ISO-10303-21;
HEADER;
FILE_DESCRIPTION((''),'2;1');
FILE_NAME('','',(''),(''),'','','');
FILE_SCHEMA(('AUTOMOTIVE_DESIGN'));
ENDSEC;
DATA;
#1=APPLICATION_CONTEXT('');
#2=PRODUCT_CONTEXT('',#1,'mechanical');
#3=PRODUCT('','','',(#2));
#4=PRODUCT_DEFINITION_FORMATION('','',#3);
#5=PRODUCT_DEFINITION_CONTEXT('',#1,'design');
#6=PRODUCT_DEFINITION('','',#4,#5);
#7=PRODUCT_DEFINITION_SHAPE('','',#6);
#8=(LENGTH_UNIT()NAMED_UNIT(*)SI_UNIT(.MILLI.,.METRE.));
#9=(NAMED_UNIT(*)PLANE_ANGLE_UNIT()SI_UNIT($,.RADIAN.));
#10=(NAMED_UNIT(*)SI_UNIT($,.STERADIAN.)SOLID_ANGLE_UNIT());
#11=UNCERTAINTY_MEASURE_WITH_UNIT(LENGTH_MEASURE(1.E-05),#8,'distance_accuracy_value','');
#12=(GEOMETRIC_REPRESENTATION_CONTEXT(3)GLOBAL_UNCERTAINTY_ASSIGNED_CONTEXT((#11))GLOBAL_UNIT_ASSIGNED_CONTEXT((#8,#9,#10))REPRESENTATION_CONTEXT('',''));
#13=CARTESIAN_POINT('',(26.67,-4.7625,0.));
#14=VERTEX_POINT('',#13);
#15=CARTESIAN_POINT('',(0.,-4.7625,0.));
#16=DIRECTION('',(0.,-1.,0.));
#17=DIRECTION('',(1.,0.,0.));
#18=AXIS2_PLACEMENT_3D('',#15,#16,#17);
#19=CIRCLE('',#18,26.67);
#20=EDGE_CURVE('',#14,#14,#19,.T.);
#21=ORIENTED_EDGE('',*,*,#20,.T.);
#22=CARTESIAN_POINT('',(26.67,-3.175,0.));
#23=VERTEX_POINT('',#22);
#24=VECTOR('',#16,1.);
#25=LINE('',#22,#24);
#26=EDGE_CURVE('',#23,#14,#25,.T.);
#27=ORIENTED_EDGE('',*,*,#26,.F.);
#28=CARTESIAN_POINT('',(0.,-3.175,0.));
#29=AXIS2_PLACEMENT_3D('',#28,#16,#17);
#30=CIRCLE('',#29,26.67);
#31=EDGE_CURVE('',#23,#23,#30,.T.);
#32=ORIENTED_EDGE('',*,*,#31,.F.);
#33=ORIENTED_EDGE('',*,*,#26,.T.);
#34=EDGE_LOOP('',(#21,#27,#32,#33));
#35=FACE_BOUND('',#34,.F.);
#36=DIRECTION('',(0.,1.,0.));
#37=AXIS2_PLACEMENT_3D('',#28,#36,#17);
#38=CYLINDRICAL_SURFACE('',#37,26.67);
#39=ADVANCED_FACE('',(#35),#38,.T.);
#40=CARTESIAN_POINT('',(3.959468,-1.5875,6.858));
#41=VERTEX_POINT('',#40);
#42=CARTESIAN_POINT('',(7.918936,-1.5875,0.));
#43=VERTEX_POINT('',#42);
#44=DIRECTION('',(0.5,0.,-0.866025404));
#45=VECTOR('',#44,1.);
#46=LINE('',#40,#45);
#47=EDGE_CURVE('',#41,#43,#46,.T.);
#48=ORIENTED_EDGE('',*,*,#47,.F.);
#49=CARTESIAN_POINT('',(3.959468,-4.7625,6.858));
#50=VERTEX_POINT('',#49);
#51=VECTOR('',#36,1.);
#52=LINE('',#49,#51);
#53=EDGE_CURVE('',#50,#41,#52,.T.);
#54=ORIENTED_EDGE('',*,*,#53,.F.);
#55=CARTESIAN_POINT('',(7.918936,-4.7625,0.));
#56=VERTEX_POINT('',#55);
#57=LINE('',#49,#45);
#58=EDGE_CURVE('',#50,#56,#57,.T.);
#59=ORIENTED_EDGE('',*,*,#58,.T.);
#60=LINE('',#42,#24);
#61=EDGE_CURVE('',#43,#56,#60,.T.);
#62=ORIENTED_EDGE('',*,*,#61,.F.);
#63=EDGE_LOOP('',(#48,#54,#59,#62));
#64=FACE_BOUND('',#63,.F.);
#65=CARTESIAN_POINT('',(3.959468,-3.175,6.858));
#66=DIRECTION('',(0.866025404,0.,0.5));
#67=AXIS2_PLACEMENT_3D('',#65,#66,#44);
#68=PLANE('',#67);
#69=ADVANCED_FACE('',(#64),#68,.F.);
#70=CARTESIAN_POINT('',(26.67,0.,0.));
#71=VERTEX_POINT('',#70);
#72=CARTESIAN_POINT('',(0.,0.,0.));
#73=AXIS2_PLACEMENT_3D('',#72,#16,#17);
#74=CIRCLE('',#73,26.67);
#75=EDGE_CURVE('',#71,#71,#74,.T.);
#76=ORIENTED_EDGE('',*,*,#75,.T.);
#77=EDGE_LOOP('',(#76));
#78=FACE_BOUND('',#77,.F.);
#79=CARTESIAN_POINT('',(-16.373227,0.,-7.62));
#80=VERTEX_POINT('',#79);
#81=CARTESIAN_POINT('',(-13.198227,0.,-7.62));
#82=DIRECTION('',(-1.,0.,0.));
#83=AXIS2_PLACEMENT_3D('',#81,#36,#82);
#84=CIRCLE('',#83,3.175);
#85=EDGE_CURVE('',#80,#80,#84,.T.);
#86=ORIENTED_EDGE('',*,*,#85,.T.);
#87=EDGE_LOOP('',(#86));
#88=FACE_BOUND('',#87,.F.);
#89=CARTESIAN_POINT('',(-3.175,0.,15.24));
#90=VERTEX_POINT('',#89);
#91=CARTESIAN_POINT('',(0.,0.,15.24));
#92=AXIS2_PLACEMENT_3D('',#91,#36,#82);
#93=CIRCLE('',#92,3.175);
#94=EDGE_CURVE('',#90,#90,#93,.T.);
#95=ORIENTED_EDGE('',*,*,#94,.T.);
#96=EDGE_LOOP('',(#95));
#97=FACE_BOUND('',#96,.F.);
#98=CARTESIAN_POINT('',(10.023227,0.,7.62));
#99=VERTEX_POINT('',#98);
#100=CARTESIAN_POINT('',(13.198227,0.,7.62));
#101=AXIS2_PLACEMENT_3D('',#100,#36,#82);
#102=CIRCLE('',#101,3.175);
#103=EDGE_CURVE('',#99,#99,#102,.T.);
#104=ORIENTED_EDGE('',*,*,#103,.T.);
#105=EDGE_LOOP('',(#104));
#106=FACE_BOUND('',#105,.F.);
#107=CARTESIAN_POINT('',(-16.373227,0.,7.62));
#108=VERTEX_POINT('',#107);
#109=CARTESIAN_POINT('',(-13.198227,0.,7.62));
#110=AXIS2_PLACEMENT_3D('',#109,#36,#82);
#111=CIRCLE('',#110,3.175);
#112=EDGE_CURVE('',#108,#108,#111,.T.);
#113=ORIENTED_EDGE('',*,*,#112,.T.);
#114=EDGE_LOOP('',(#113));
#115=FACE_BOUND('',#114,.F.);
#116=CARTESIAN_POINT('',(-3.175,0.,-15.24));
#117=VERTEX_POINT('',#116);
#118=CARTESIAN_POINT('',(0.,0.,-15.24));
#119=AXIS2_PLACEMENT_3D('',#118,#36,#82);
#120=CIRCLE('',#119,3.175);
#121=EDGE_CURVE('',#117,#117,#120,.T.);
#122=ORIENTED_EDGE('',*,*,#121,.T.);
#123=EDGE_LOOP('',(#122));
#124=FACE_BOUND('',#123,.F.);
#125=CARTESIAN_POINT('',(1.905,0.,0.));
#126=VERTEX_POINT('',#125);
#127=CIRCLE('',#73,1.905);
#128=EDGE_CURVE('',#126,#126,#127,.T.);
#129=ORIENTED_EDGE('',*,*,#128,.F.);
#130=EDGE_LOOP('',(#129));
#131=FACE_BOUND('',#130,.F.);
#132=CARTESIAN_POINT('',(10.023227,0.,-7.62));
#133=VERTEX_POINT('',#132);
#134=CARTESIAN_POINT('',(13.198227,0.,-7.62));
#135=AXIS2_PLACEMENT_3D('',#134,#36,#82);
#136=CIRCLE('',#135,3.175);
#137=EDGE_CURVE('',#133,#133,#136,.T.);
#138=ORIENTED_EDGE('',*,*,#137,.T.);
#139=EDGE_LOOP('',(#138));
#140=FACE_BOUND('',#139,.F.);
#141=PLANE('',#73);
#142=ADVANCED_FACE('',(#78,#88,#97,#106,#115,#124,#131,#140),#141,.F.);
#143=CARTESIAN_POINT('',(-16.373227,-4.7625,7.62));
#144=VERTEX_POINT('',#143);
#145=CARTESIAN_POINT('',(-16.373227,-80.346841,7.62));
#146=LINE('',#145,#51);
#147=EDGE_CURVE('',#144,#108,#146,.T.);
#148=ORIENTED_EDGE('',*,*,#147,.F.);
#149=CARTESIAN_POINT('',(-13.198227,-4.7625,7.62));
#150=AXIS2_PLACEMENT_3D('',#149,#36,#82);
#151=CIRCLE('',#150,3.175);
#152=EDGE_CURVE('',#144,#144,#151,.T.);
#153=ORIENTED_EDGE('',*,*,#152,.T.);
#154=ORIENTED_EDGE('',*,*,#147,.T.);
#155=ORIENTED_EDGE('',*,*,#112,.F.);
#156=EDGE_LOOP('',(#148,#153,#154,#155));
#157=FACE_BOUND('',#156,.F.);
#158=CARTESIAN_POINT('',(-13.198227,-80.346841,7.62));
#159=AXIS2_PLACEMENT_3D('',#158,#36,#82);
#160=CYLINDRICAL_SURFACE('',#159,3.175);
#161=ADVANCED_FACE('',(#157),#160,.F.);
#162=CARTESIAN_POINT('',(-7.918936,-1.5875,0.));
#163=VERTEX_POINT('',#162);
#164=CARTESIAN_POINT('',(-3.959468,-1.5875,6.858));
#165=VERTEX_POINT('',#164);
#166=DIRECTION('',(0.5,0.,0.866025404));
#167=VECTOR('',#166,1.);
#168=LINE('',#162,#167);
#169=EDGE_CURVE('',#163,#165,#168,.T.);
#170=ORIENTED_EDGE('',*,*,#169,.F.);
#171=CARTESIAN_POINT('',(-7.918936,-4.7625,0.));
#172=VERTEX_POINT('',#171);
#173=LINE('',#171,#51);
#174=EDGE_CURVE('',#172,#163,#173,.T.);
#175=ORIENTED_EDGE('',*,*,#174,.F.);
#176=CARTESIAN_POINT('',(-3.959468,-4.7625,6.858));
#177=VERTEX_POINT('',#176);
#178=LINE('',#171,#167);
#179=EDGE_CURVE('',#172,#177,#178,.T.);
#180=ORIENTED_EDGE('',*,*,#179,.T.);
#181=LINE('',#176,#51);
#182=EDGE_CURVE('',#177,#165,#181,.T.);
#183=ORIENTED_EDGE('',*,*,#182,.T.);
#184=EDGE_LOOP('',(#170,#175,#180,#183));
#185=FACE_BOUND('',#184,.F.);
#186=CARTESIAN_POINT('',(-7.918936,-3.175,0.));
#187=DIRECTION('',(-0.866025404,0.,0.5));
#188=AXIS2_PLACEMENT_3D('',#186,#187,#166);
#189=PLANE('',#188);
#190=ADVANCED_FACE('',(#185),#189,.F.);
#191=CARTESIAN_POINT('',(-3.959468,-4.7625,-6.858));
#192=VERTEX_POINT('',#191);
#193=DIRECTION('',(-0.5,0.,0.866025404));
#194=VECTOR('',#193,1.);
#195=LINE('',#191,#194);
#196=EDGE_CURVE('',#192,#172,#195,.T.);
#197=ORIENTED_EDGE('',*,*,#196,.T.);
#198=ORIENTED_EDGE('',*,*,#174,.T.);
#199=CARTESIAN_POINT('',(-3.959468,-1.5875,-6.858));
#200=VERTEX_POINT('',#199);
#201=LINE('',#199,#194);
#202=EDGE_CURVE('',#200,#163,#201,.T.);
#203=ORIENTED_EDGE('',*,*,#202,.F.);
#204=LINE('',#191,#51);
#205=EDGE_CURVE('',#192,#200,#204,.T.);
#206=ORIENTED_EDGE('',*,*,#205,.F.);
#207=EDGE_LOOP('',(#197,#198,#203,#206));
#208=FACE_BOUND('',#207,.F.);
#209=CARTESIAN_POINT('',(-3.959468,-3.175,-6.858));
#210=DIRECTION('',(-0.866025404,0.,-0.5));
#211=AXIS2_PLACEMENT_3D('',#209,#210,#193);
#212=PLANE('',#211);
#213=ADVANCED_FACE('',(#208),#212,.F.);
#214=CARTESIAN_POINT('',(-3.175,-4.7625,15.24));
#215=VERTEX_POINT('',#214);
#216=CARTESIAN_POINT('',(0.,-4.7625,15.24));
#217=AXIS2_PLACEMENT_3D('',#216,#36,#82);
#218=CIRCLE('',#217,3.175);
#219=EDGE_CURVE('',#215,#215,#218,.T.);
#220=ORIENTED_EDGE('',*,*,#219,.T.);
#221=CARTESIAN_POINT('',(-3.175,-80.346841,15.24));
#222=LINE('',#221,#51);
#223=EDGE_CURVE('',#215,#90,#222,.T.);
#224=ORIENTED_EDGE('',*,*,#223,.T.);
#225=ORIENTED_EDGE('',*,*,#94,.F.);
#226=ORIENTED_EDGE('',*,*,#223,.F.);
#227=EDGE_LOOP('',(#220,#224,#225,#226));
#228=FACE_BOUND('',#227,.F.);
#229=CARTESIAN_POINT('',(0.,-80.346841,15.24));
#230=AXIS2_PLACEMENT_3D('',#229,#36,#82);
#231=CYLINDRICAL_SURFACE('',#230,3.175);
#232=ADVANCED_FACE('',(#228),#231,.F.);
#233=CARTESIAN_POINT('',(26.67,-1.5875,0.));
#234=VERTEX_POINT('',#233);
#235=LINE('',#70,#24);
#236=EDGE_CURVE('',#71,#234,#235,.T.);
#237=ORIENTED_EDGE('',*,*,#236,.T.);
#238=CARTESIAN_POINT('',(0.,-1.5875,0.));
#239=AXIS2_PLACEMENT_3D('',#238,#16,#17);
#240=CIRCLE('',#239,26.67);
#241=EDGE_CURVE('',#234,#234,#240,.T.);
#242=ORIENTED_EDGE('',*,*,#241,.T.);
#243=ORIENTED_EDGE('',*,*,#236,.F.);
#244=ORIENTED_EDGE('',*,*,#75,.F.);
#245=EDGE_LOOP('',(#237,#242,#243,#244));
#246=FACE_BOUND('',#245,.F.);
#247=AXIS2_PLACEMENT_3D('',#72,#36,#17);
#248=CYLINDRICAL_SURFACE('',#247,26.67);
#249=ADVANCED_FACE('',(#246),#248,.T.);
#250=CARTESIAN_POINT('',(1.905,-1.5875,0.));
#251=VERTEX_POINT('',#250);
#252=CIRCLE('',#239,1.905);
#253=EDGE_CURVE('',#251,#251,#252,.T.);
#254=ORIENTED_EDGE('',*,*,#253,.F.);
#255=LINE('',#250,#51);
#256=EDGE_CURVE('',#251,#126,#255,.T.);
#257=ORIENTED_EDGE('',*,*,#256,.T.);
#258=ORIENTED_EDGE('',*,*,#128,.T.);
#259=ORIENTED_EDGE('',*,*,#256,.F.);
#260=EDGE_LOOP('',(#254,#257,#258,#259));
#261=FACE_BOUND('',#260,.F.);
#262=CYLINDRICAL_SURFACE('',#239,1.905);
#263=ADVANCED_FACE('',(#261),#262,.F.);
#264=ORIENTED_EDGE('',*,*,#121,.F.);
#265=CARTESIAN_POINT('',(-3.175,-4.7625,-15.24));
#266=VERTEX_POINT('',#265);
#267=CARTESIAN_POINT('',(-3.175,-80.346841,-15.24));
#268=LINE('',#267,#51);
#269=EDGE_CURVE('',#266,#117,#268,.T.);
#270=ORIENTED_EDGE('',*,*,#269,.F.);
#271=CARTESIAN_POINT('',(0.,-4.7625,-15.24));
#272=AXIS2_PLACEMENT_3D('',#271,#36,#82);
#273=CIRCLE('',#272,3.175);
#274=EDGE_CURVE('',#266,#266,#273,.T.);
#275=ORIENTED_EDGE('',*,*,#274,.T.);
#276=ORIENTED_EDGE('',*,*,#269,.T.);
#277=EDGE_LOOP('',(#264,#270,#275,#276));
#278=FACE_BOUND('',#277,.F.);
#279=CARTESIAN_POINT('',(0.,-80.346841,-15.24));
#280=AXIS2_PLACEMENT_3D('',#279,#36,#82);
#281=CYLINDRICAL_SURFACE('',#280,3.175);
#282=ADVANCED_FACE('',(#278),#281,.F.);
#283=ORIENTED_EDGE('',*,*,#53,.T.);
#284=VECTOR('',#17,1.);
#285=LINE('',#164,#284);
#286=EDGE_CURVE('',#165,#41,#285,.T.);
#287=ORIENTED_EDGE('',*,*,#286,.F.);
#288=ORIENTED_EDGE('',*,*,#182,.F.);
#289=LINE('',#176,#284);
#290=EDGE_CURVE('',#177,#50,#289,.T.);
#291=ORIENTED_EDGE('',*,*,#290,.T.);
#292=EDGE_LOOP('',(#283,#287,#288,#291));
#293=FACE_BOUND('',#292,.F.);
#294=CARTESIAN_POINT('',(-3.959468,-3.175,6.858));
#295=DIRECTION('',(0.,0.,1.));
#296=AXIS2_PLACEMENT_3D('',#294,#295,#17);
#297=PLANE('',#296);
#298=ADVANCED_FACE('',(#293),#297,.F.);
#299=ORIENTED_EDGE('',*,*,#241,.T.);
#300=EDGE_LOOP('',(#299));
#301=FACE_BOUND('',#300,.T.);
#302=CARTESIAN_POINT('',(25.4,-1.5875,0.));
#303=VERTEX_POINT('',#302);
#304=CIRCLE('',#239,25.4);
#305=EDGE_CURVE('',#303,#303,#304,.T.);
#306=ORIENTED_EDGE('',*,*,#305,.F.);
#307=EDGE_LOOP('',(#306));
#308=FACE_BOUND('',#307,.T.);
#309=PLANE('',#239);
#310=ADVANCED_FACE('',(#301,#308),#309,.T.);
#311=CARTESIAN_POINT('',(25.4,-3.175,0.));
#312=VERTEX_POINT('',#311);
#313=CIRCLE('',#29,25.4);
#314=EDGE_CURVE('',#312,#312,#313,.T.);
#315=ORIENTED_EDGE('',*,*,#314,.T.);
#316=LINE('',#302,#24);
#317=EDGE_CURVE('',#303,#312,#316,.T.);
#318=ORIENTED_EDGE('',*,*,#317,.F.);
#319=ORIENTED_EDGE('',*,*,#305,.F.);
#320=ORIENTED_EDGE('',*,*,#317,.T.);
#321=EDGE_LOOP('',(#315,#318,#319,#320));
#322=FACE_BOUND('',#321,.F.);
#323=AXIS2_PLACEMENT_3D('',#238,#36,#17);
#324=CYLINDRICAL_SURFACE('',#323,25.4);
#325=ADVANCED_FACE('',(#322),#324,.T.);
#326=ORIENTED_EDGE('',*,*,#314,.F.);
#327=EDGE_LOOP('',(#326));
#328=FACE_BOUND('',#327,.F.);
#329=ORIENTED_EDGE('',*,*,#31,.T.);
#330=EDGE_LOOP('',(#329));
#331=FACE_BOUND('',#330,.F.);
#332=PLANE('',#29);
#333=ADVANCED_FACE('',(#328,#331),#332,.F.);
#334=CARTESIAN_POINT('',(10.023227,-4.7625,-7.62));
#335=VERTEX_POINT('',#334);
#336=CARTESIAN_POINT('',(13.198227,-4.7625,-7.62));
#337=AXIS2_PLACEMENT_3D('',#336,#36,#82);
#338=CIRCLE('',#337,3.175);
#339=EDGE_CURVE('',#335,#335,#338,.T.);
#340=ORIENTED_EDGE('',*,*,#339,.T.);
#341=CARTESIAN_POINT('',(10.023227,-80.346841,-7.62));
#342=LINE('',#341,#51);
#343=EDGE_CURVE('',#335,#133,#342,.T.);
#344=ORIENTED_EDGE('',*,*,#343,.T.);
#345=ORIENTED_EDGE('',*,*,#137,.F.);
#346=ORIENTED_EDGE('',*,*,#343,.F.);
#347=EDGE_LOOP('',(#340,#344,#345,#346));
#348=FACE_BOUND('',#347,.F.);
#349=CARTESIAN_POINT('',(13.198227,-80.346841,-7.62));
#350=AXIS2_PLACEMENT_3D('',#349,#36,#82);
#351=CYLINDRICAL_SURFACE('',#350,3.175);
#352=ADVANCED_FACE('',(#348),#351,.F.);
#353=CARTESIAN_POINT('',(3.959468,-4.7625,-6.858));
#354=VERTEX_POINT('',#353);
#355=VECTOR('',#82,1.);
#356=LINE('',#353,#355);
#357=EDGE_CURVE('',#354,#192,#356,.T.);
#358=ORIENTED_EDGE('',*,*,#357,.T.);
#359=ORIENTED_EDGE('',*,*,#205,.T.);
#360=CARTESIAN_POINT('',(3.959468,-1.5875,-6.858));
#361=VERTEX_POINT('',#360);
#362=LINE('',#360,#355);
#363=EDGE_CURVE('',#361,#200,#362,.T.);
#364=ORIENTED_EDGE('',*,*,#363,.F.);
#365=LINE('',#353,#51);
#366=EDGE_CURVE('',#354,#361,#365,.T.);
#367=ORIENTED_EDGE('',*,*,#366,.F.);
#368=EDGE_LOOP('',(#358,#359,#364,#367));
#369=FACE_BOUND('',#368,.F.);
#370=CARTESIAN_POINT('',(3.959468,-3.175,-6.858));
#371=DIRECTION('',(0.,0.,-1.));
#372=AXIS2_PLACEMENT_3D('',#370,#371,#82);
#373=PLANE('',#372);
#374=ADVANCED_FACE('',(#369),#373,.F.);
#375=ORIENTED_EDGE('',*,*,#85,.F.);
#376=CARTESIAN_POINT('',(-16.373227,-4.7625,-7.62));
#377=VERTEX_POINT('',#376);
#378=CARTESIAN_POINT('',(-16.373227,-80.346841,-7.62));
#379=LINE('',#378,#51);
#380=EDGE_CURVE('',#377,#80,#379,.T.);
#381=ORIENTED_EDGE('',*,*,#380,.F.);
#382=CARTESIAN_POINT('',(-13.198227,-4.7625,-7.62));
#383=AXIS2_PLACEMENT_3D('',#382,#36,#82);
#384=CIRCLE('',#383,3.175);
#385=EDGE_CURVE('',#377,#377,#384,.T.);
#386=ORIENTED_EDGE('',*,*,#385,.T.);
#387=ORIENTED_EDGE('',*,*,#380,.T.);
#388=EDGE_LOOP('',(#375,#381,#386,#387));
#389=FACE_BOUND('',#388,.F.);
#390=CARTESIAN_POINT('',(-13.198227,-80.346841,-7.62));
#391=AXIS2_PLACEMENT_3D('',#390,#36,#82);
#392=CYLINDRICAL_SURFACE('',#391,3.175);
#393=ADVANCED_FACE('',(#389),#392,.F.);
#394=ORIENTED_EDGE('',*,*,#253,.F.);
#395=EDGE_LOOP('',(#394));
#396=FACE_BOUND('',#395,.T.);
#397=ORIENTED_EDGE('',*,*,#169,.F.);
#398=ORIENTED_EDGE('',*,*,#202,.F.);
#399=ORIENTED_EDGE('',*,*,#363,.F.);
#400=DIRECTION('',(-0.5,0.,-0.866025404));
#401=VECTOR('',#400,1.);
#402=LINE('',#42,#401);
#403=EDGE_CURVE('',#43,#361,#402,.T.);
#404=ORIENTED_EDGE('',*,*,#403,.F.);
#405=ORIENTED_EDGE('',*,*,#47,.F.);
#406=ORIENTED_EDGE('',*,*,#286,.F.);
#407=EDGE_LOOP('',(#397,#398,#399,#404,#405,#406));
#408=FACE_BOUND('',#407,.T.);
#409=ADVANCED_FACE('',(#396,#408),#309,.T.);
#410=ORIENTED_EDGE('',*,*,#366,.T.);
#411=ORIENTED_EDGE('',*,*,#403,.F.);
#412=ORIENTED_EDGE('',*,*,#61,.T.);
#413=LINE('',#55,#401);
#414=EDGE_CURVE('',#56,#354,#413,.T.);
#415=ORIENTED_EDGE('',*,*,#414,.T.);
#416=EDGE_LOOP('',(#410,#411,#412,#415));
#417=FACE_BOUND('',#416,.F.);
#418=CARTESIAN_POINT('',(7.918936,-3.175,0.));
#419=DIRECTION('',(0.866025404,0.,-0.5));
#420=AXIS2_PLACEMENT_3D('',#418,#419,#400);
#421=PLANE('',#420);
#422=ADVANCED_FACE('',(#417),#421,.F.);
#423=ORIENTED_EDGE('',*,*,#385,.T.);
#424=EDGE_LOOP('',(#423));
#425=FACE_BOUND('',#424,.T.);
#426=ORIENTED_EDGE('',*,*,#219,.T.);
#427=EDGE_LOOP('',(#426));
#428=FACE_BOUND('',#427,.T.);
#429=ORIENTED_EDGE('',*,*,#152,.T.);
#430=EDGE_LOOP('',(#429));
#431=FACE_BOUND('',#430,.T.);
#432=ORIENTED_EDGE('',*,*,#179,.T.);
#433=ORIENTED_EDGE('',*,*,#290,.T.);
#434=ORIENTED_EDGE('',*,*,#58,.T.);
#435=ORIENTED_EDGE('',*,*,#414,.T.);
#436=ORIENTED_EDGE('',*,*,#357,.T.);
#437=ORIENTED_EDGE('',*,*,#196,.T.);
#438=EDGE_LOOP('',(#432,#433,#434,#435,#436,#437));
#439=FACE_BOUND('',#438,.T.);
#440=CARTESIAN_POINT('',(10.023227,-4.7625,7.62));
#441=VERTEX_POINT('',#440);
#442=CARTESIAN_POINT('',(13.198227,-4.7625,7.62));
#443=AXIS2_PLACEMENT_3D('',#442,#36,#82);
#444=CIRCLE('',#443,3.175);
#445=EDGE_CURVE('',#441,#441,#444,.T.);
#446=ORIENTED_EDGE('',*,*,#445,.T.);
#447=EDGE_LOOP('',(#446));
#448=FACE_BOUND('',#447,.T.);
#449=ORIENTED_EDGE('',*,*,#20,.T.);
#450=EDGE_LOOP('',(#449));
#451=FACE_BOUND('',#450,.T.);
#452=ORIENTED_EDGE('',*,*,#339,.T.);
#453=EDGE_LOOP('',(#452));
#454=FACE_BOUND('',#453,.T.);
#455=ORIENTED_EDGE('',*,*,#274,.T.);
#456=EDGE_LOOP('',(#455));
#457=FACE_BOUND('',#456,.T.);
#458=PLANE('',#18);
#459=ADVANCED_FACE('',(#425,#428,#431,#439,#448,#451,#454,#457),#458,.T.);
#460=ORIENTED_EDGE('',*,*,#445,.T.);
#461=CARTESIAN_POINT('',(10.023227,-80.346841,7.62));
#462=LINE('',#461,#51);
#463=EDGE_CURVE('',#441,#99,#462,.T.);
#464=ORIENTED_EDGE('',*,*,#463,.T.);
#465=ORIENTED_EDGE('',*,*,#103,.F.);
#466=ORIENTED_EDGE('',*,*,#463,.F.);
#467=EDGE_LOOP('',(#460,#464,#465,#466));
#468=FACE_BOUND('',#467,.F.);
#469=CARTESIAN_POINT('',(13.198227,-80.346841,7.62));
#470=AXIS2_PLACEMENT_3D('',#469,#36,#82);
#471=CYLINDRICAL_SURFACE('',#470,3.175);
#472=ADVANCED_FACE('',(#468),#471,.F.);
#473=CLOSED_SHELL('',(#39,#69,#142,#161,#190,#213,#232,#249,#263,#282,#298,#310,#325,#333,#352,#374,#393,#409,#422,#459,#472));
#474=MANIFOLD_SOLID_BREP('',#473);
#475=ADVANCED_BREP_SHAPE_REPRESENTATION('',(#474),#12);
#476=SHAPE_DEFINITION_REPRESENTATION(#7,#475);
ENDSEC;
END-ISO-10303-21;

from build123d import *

# Parameters (mm, degrees)
F0_R     = 26.67
F0_R_2   = 25.4
F1_DEPTH = 1.5875
F2_R     = 25.4
F3_DEPTH = 1.5875
F4_R     = 26.67
F4_R_2   = 25.4
F5_DEPTH = 1.5875
F6_R     = 1.905
F7_DEPTH = 25.4
F9_D     = 6.35


# Not quite as in the source:
# - a length typed as a fraction of an inch, garbled in the dataset ("3 / 203.2 mm" for 3/8 in), is restored


with BuildPart() as f1:
    # F0 (on Front) → F1 (new body)
    with BuildSketch(Plane.XZ):
        Circle(F0_R)
        Circle(F0_R_2, mode=Mode.SUBTRACT)
        Circle(F0_R_2)
        with BuildLine():
            ThreePointArc((3.9594681461, 6.858), (6.858, 3.9594681461), (7.9189362922, 0))
            ThreePointArc((7.9189362922, 0), (6.858, -3.9594681461), (3.9594681461, -6.858))
            ThreePointArc((3.9594681461, -6.858), (0, -7.9189362922), (-3.9594681461, -6.858))
            ThreePointArc((-3.9594681461, -6.858), (-6.858, -3.9594681461), (-7.9189362922, 0))
            ThreePointArc((-7.9189362922, 0), (-6.858, 3.9594681461), (-3.9594681461, 6.858))
            ThreePointArc((-3.9594681461, 6.858), (0, 7.9189362922), (3.9594681461, 6.858))
        make_face(mode=Mode.SUBTRACT)
        Polygon((3.9594681461, -6.858), (7.9189362922, 0), (3.9594681461, 6.858), (-3.9594681461, 6.858), (-7.9189362922, 0), (-3.9594681461, -6.858), align=None)
        with BuildLine():
            Line((-3.9594681461, 6.858), (3.9594681461, 6.858))
            ThreePointArc((3.9594681461, 6.858), (0, 7.9189362922), (-3.9594681461, 6.858))
        make_face()
        with BuildLine():
            Line((3.9594681461, 6.858), (7.9189362922, 0))
            ThreePointArc((7.9189362922, 0), (6.858, 3.9594681461), (3.9594681461, 6.858))
        make_face()
        with BuildLine():
            ThreePointArc((3.9594681461, -6.858), (6.858, -3.9594681461), (7.9189362922, 0))
            Line((7.9189362922, 0), (3.9594681461, -6.858))
        make_face()
        with BuildLine():
            ThreePointArc((-3.9594681461, -6.858), (0, -7.9189362922), (3.9594681461, -6.858))
            Line((3.9594681461, -6.858), (-3.9594681461, -6.858))
        make_face()
        with BuildLine():
            ThreePointArc((-7.9189362922, 0), (-6.858, -3.9594681461), (-3.9594681461, -6.858))
            Line((-3.9594681461, -6.858), (-7.9189362922, 0))
        make_face()
        with BuildLine():
            Line((-7.9189362922, 0), (-3.9594681461, 6.858))
            ThreePointArc((-3.9594681461, 6.858), (-6.858, 3.9594681461), (-7.9189362922, 0))
        make_face()
    extrude(amount=F1_DEPTH)

    # F2 (on face) → F3 (join)
    with BuildSketch(Plane.XZ.offset(1.5875)):
        Circle(F2_R)
        with BuildLine():
            ThreePointArc((3.9594681461, 6.858), (6.858, 3.9594681461), (7.9189362922, 0))
            ThreePointArc((7.9189362922, 0), (6.858, -3.9594681461), (3.9594681461, -6.858))
            ThreePointArc((3.9594681461, -6.858), (0, -7.9189362922), (-3.9594681461, -6.858))
            ThreePointArc((-3.9594681461, -6.858), (-6.858, -3.9594681461), (-7.9189362922, 0))
            ThreePointArc((-7.9189362922, 0), (-6.858, 3.9594681461), (-3.9594681461, 6.858))
            ThreePointArc((-3.9594681461, 6.858), (0, 7.9189362922), (3.9594681461, 6.858))
        make_face(mode=Mode.SUBTRACT)
        with BuildLine():
            Line((3.9594681461, 6.858), (7.9189362922, 0))
            ThreePointArc((7.9189362922, 0), (6.858, 3.9594681461), (3.9594681461, 6.858))
        make_face()
        with BuildLine():
            Line((-3.9594681461, 6.858), (3.9594681461, 6.858))
            ThreePointArc((3.9594681461, 6.858), (0, 7.9189362922), (-3.9594681461, 6.858))
        make_face()
        with BuildLine():
            Line((-7.9189362922, 0), (-3.9594681461, 6.858))
            ThreePointArc((-3.9594681461, 6.858), (-6.858, 3.9594681461), (-7.9189362922, 0))
        make_face()
        with BuildLine():
            ThreePointArc((-7.9189362922, 0), (-6.858, -3.9594681461), (-3.9594681461, -6.858))
            Line((-3.9594681461, -6.858), (-7.9189362922, 0))
        make_face()
        with BuildLine():
            ThreePointArc((-3.9594681461, -6.858), (0, -7.9189362922), (3.9594681461, -6.858))
            Line((3.9594681461, -6.858), (-3.9594681461, -6.858))
        make_face()
        with BuildLine():
            ThreePointArc((3.9594681461, -6.858), (6.858, -3.9594681461), (7.9189362922, 0))
            Line((7.9189362922, 0), (3.9594681461, -6.858))
        make_face()
    extrude(amount=F3_DEPTH)

    # F4 (on face) + F0 (on Front) → F5 (join)
    with BuildSketch(Plane.XZ.offset(3.175)):
        Circle(F4_R)
        Circle(F4_R_2, mode=Mode.SUBTRACT)
        Circle(F4_R_2)
        Polygon((7.9189362922, 0), (3.9594681461, -6.858), (-3.9594681461, -6.858), (-7.9189362922, 0), (-3.9594681461, 6.858), (3.9594681461, 6.858), align=None, mode=Mode.SUBTRACT)
    with BuildSketch(Plane.XZ):
        Circle(F0_R)
        Circle(F0_R_2, mode=Mode.SUBTRACT)
    extrude(amount=F5_DEPTH)

    # F6 (on face) → F7 (cut)
    with BuildSketch(Plane.XZ.offset(1.5875)):
        Circle(F6_R)
    extrude(amount=-F7_DEPTH, mode=Mode.SUBTRACT)

    # F9 (through all)
    with Locations(Plane.XZ.offset(4.7625)):
        with Locations((0, 15.24), (0, -15.24), (-13.1982271537, -7.62), (-13.1982271537, 7.62), (13.1982271537, 7.62), (13.1982271537, -7.62)):
            Hole(F9_D / 2)


solid = f1.part
